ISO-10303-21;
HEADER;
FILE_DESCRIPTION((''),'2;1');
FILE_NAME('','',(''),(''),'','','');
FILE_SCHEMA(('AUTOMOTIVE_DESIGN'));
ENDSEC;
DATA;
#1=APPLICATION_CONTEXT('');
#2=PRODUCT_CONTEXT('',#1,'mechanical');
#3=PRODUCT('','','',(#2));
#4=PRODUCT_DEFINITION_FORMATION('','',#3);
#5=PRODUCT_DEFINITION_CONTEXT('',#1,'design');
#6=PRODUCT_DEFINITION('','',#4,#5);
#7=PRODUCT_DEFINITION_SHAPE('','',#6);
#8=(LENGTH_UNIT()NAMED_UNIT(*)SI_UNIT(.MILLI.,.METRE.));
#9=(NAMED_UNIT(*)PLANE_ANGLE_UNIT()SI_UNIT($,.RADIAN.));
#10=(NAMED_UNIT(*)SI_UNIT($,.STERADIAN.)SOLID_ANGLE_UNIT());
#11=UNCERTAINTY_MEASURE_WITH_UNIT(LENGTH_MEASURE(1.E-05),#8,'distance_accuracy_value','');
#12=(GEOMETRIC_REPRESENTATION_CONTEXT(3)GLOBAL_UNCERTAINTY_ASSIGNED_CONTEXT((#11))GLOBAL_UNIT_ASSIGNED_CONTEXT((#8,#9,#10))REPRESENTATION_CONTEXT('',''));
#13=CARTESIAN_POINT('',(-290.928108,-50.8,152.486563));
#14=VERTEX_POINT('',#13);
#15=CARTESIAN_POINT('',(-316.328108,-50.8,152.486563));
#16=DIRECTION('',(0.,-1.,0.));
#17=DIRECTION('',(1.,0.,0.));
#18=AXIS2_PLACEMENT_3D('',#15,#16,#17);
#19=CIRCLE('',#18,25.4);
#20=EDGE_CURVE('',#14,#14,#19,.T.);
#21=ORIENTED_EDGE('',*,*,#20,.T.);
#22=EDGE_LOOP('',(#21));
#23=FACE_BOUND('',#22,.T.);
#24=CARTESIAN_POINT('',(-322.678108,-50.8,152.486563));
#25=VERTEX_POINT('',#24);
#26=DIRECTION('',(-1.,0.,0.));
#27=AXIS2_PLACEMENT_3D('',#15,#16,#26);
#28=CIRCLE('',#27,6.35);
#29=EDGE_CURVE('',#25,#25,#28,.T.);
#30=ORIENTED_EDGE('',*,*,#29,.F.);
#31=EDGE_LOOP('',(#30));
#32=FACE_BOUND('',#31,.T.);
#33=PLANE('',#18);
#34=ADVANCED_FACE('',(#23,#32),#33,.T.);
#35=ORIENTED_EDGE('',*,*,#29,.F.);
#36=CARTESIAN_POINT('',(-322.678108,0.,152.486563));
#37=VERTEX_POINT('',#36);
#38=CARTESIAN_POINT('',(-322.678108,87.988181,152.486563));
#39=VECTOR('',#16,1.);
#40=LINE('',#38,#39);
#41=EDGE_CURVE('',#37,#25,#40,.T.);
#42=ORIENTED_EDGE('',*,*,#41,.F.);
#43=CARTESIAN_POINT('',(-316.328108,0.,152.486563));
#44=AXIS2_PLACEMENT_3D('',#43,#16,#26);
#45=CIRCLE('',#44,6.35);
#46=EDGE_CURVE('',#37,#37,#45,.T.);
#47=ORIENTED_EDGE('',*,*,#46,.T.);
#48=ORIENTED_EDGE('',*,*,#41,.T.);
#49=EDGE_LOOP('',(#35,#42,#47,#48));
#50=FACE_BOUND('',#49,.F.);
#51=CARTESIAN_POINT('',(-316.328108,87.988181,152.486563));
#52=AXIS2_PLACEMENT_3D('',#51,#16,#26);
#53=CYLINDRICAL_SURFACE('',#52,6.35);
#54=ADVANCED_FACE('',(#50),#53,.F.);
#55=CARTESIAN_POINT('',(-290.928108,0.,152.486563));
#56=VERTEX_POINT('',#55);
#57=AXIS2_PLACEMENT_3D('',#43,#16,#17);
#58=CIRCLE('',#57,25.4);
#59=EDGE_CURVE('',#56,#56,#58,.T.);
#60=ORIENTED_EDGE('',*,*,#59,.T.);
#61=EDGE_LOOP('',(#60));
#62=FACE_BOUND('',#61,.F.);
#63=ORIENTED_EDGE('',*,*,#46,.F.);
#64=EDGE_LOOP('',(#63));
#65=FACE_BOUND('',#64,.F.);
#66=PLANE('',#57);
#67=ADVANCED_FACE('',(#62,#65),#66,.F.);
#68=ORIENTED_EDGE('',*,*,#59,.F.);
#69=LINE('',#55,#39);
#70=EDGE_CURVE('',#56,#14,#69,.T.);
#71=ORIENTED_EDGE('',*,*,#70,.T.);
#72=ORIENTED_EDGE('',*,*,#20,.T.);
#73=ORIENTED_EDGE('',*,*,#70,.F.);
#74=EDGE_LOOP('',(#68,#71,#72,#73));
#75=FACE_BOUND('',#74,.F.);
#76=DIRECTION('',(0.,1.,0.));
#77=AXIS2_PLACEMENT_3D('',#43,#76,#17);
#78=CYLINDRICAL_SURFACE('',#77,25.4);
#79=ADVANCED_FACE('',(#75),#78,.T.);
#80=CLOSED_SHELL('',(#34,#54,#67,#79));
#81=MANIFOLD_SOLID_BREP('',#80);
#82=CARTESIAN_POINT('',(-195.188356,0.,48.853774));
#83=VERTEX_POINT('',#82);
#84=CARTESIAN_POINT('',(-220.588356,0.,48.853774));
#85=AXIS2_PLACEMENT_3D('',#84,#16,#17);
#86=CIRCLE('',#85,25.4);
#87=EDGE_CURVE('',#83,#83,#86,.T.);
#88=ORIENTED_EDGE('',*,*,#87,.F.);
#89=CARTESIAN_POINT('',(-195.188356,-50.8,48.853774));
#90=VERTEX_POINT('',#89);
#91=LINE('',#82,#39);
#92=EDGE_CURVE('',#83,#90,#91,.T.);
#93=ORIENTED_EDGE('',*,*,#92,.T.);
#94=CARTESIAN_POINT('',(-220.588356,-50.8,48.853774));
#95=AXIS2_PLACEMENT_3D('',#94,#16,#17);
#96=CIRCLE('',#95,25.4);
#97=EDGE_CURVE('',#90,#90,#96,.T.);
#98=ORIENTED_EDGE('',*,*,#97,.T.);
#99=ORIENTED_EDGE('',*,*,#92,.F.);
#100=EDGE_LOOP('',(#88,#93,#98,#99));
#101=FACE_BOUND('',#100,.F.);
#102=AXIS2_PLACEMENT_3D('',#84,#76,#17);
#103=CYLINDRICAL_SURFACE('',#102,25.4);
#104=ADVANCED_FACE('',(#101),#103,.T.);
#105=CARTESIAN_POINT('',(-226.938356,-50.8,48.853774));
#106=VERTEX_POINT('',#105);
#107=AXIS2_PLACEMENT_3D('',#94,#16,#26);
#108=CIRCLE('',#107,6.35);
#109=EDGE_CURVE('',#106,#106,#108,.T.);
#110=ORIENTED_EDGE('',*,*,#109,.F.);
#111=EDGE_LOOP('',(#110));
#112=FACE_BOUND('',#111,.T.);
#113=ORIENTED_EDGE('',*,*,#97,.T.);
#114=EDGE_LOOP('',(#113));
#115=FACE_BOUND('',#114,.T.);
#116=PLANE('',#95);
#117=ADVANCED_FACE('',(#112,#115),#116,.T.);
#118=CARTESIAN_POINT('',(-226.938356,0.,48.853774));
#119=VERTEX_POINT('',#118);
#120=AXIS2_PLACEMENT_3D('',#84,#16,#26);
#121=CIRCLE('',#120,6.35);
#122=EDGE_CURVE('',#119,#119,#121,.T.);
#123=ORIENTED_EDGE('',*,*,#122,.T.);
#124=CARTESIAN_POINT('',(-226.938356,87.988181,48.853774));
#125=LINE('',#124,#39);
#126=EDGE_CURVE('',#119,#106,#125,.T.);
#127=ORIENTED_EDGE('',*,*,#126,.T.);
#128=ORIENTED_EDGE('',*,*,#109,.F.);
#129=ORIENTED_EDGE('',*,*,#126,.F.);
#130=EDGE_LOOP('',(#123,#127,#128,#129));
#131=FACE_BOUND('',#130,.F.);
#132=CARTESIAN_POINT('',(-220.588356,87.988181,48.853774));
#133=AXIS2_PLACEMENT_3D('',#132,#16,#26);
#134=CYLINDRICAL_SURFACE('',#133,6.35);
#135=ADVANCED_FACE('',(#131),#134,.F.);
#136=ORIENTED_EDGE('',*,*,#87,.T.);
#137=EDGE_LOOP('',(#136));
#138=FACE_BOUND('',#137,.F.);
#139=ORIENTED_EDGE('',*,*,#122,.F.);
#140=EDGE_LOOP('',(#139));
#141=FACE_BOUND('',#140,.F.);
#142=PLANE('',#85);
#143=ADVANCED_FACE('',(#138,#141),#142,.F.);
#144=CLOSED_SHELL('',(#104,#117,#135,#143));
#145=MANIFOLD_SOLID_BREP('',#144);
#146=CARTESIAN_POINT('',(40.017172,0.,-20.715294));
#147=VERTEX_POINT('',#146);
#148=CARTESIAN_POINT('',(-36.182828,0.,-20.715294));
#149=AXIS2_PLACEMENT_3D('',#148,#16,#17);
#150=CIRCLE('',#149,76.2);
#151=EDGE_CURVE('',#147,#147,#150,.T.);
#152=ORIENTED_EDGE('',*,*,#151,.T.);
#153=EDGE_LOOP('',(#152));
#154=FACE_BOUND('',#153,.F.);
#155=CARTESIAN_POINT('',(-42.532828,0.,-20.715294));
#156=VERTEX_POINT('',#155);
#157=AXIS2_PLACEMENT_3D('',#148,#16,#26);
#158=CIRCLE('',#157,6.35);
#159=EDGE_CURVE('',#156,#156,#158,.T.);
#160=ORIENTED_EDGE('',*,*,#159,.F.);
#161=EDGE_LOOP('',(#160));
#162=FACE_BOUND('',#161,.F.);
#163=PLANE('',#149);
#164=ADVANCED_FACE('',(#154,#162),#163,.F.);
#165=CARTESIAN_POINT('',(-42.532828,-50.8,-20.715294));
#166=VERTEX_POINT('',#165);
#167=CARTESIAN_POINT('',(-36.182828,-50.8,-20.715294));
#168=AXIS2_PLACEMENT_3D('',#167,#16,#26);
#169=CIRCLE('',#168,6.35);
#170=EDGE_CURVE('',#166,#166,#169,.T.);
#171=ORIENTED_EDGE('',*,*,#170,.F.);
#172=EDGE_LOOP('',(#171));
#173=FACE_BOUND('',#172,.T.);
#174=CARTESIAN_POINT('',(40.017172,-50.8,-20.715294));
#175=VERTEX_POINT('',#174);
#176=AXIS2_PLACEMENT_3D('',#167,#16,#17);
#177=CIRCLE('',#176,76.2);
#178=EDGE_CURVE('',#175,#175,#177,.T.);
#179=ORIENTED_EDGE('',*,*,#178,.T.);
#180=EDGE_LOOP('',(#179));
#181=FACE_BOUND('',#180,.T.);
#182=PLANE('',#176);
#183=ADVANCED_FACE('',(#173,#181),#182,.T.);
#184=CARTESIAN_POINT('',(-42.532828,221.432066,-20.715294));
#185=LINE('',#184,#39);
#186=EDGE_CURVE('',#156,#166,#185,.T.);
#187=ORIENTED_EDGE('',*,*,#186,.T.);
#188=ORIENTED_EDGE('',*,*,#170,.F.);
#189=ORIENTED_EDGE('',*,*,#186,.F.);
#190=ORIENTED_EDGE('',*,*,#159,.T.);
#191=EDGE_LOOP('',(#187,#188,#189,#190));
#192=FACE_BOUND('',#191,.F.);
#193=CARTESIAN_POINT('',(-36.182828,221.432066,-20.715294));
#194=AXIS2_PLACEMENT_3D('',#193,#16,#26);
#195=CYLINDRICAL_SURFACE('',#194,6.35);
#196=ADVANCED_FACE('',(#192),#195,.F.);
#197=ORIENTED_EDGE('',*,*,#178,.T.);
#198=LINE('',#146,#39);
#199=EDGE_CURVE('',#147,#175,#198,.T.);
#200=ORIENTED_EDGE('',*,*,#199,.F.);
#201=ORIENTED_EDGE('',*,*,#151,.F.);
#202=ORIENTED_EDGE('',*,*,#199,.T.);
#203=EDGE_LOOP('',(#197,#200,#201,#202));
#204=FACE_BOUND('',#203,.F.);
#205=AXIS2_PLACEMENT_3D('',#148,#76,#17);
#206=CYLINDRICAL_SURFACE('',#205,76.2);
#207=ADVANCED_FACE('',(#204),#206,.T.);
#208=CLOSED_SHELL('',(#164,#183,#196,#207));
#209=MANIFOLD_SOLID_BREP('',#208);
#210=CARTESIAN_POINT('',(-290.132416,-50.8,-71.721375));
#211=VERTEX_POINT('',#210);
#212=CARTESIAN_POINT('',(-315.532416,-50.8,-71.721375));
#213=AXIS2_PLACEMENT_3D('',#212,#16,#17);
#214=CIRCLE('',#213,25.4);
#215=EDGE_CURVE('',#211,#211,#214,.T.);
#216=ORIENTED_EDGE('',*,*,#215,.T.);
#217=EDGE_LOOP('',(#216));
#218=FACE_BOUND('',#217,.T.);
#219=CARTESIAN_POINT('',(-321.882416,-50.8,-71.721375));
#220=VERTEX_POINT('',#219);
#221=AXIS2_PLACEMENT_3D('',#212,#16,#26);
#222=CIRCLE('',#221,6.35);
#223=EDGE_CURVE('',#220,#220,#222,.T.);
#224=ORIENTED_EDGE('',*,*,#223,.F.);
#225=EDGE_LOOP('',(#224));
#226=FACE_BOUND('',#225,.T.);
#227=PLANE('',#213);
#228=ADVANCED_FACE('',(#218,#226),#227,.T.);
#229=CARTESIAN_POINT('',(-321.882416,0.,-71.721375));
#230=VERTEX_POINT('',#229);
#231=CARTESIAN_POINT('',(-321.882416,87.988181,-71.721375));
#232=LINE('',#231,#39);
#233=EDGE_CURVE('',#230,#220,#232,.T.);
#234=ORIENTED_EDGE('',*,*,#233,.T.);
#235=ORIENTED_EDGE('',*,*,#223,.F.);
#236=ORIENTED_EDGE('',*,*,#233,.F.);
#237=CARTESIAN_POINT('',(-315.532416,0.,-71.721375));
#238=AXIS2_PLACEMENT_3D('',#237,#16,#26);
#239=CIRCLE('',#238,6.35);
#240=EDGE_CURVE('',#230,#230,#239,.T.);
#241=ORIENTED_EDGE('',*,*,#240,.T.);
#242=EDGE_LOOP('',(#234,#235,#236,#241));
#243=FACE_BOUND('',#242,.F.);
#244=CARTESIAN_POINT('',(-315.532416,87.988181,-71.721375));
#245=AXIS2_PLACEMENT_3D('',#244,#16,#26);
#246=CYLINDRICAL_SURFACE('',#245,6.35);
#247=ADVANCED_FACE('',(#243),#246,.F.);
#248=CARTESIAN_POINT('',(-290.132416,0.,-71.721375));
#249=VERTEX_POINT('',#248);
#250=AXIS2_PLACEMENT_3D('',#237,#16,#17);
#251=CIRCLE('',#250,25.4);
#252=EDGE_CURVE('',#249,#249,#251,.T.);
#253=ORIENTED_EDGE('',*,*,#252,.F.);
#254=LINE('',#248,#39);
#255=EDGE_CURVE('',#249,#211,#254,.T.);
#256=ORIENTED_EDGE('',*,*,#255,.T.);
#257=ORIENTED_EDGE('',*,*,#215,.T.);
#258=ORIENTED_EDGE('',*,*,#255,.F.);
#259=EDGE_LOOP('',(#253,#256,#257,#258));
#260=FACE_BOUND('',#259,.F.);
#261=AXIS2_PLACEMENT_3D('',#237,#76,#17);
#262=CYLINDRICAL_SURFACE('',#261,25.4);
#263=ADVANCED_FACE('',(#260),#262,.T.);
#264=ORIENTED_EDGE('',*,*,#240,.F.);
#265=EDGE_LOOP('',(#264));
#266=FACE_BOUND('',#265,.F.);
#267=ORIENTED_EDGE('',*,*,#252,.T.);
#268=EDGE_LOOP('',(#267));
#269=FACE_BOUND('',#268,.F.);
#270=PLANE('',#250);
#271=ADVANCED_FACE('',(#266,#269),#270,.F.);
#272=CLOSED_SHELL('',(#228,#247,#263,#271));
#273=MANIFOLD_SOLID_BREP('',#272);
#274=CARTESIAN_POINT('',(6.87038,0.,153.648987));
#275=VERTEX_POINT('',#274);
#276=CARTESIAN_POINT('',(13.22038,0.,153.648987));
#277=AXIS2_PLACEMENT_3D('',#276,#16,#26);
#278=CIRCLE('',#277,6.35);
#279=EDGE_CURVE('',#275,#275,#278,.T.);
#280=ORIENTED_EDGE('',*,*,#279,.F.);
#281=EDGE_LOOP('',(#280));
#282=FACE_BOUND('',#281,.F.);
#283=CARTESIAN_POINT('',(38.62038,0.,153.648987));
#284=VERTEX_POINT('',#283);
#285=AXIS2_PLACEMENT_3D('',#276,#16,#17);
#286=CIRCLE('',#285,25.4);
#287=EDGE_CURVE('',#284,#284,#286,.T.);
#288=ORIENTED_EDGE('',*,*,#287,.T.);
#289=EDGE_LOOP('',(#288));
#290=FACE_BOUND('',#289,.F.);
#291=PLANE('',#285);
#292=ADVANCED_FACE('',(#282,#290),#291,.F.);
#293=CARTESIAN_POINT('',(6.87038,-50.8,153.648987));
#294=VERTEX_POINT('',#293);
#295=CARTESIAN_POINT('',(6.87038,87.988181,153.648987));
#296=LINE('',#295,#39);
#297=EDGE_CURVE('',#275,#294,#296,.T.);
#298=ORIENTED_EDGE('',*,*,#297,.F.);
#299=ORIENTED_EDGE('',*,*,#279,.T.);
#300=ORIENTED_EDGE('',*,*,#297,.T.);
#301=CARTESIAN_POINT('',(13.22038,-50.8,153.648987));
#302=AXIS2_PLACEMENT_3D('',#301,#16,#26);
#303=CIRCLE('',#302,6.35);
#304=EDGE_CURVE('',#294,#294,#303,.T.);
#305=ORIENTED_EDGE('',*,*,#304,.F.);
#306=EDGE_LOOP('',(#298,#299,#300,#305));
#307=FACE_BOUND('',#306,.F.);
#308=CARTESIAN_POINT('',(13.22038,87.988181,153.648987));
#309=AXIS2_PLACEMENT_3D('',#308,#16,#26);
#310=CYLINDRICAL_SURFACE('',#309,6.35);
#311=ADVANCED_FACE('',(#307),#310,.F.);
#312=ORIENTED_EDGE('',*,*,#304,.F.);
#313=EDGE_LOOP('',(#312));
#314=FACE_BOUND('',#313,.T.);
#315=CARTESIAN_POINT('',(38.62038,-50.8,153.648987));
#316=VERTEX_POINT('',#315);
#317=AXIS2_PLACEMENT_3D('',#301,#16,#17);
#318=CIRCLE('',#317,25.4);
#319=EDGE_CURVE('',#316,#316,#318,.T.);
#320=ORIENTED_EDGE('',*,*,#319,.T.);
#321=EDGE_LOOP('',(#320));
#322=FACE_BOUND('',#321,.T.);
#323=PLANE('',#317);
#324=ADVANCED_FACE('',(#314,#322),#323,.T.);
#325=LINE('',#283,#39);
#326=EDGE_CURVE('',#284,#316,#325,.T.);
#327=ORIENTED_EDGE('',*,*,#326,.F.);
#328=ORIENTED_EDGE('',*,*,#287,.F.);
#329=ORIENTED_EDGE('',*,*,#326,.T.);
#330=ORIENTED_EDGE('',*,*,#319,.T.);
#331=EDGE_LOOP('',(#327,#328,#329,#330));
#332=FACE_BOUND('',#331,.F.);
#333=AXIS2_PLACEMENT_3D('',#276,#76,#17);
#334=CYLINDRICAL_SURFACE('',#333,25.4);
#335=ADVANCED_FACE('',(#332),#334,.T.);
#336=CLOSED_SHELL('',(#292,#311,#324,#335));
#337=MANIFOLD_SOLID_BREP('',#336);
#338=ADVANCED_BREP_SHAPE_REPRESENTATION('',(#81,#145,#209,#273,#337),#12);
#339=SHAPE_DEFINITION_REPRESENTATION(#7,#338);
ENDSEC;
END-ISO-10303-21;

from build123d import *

# Parameters (mm, degrees)
F0_R       = 25.4
F2_DEPTH   = 50.8
F1_R       = 76.2
F5_DEPTH   = 50.8
F6_D       = 12.7
F6_2_D     = 12.7
F6_3_D     = 12.7
F6_ON_F1_D = 12.7
F7_D       = 12.7


# Not quite as in the source:
# - the program builds the solid bodies; features that only make, move or delete a surface that nothing else refers to are left out


with BuildPart() as f2:
    # F0 (on Front) → F2 (new body)
    with BuildSketch(Plane.XZ):
        with Locations((-316.3281083107, 152.4865627289)):
            Circle(F0_R)
    extrude(amount=F2_DEPTH)

    # F6 (through all)
    with Locations(Plane(origin=(0, 0, 0), x_dir=(1, 0, 0), z_dir=(0, 1, 0))):
        with Locations((-315.5324161053, 71.7213749886), (-316.3281083107, -152.4865627289), (13.2203800604, -153.6489874125), (-220.5883562565, -48.8537736237)):
            Hole(F6_D / 2)


with BuildPart() as f2b:
    # F0 (on Front) → F2, piece 2 (new body)
    with BuildSketch(Plane.XZ):
        with Locations((-315.5324161053, -71.7213749886)):
            Circle(F0_R)
    extrude(amount=F2_DEPTH)

    # F6#2 (through all)
    with Locations(Plane(origin=(0, 0, 0), x_dir=(1, 0, 0), z_dir=(0, 1, 0))):
        with Locations((-315.5324161053, 71.7213749886), (-316.3281083107, -152.4865627289), (13.2203800604, -153.6489874125), (-220.5883562565, -48.8537736237)):
            Hole(F6_2_D / 2)


with BuildPart() as f2c:
    # F0 (on Front) → F2, piece 3 (new body)
    with BuildSketch(Plane.XZ):
        with Locations((13.2203800604, 153.6489874125)):
            Circle(F0_R)
    extrude(amount=F2_DEPTH)

    # F6#3 (through all)
    with Locations(Plane(origin=(0, 0, 0), x_dir=(1, 0, 0), z_dir=(0, 1, 0))):
        with Locations((-315.5324161053, 71.7213749886), (-316.3281083107, -152.4865627289), (13.2203800604, -153.6489874125), (-220.5883562565, -48.8537736237)):
            Hole(F6_3_D / 2)


with BuildPart() as f2d:
    # F1 (on Front) → F2, piece 4 (new body)
    with BuildSketch(Plane.XZ):
        with Locations((-36.1828282475, -20.7152944058)):
            Circle(F1_R)
    extrude(amount=F2_DEPTH)

    # F6 on F1 (through all)
    with Locations(Plane(origin=(0, 0, 0), x_dir=(1, 0, 0), z_dir=(0, 1, 0))):
        with Locations((-36.1828282475, 20.7152944058)):
            Hole(F6_ON_F1_D / 2)


with BuildPart() as f5:
    # F0 (on Front) → F5 (new body)
    with BuildSketch(Plane.XZ):
        with Locations((-220.5883562565, 48.8537736237)):
            Circle(F0_R)
    extrude(amount=F5_DEPTH)

    # F7 (through all)
    with Locations(Plane(origin=(0, 0, 0), x_dir=(1, 0, 0), z_dir=(0, 1, 0))):
        with Locations((-220.5883562565, -48.8537736237)):
            Hole(F7_D / 2)


solid = Compound([f2.part, f2b.part, f2c.part, f2d.part, f5.part])
